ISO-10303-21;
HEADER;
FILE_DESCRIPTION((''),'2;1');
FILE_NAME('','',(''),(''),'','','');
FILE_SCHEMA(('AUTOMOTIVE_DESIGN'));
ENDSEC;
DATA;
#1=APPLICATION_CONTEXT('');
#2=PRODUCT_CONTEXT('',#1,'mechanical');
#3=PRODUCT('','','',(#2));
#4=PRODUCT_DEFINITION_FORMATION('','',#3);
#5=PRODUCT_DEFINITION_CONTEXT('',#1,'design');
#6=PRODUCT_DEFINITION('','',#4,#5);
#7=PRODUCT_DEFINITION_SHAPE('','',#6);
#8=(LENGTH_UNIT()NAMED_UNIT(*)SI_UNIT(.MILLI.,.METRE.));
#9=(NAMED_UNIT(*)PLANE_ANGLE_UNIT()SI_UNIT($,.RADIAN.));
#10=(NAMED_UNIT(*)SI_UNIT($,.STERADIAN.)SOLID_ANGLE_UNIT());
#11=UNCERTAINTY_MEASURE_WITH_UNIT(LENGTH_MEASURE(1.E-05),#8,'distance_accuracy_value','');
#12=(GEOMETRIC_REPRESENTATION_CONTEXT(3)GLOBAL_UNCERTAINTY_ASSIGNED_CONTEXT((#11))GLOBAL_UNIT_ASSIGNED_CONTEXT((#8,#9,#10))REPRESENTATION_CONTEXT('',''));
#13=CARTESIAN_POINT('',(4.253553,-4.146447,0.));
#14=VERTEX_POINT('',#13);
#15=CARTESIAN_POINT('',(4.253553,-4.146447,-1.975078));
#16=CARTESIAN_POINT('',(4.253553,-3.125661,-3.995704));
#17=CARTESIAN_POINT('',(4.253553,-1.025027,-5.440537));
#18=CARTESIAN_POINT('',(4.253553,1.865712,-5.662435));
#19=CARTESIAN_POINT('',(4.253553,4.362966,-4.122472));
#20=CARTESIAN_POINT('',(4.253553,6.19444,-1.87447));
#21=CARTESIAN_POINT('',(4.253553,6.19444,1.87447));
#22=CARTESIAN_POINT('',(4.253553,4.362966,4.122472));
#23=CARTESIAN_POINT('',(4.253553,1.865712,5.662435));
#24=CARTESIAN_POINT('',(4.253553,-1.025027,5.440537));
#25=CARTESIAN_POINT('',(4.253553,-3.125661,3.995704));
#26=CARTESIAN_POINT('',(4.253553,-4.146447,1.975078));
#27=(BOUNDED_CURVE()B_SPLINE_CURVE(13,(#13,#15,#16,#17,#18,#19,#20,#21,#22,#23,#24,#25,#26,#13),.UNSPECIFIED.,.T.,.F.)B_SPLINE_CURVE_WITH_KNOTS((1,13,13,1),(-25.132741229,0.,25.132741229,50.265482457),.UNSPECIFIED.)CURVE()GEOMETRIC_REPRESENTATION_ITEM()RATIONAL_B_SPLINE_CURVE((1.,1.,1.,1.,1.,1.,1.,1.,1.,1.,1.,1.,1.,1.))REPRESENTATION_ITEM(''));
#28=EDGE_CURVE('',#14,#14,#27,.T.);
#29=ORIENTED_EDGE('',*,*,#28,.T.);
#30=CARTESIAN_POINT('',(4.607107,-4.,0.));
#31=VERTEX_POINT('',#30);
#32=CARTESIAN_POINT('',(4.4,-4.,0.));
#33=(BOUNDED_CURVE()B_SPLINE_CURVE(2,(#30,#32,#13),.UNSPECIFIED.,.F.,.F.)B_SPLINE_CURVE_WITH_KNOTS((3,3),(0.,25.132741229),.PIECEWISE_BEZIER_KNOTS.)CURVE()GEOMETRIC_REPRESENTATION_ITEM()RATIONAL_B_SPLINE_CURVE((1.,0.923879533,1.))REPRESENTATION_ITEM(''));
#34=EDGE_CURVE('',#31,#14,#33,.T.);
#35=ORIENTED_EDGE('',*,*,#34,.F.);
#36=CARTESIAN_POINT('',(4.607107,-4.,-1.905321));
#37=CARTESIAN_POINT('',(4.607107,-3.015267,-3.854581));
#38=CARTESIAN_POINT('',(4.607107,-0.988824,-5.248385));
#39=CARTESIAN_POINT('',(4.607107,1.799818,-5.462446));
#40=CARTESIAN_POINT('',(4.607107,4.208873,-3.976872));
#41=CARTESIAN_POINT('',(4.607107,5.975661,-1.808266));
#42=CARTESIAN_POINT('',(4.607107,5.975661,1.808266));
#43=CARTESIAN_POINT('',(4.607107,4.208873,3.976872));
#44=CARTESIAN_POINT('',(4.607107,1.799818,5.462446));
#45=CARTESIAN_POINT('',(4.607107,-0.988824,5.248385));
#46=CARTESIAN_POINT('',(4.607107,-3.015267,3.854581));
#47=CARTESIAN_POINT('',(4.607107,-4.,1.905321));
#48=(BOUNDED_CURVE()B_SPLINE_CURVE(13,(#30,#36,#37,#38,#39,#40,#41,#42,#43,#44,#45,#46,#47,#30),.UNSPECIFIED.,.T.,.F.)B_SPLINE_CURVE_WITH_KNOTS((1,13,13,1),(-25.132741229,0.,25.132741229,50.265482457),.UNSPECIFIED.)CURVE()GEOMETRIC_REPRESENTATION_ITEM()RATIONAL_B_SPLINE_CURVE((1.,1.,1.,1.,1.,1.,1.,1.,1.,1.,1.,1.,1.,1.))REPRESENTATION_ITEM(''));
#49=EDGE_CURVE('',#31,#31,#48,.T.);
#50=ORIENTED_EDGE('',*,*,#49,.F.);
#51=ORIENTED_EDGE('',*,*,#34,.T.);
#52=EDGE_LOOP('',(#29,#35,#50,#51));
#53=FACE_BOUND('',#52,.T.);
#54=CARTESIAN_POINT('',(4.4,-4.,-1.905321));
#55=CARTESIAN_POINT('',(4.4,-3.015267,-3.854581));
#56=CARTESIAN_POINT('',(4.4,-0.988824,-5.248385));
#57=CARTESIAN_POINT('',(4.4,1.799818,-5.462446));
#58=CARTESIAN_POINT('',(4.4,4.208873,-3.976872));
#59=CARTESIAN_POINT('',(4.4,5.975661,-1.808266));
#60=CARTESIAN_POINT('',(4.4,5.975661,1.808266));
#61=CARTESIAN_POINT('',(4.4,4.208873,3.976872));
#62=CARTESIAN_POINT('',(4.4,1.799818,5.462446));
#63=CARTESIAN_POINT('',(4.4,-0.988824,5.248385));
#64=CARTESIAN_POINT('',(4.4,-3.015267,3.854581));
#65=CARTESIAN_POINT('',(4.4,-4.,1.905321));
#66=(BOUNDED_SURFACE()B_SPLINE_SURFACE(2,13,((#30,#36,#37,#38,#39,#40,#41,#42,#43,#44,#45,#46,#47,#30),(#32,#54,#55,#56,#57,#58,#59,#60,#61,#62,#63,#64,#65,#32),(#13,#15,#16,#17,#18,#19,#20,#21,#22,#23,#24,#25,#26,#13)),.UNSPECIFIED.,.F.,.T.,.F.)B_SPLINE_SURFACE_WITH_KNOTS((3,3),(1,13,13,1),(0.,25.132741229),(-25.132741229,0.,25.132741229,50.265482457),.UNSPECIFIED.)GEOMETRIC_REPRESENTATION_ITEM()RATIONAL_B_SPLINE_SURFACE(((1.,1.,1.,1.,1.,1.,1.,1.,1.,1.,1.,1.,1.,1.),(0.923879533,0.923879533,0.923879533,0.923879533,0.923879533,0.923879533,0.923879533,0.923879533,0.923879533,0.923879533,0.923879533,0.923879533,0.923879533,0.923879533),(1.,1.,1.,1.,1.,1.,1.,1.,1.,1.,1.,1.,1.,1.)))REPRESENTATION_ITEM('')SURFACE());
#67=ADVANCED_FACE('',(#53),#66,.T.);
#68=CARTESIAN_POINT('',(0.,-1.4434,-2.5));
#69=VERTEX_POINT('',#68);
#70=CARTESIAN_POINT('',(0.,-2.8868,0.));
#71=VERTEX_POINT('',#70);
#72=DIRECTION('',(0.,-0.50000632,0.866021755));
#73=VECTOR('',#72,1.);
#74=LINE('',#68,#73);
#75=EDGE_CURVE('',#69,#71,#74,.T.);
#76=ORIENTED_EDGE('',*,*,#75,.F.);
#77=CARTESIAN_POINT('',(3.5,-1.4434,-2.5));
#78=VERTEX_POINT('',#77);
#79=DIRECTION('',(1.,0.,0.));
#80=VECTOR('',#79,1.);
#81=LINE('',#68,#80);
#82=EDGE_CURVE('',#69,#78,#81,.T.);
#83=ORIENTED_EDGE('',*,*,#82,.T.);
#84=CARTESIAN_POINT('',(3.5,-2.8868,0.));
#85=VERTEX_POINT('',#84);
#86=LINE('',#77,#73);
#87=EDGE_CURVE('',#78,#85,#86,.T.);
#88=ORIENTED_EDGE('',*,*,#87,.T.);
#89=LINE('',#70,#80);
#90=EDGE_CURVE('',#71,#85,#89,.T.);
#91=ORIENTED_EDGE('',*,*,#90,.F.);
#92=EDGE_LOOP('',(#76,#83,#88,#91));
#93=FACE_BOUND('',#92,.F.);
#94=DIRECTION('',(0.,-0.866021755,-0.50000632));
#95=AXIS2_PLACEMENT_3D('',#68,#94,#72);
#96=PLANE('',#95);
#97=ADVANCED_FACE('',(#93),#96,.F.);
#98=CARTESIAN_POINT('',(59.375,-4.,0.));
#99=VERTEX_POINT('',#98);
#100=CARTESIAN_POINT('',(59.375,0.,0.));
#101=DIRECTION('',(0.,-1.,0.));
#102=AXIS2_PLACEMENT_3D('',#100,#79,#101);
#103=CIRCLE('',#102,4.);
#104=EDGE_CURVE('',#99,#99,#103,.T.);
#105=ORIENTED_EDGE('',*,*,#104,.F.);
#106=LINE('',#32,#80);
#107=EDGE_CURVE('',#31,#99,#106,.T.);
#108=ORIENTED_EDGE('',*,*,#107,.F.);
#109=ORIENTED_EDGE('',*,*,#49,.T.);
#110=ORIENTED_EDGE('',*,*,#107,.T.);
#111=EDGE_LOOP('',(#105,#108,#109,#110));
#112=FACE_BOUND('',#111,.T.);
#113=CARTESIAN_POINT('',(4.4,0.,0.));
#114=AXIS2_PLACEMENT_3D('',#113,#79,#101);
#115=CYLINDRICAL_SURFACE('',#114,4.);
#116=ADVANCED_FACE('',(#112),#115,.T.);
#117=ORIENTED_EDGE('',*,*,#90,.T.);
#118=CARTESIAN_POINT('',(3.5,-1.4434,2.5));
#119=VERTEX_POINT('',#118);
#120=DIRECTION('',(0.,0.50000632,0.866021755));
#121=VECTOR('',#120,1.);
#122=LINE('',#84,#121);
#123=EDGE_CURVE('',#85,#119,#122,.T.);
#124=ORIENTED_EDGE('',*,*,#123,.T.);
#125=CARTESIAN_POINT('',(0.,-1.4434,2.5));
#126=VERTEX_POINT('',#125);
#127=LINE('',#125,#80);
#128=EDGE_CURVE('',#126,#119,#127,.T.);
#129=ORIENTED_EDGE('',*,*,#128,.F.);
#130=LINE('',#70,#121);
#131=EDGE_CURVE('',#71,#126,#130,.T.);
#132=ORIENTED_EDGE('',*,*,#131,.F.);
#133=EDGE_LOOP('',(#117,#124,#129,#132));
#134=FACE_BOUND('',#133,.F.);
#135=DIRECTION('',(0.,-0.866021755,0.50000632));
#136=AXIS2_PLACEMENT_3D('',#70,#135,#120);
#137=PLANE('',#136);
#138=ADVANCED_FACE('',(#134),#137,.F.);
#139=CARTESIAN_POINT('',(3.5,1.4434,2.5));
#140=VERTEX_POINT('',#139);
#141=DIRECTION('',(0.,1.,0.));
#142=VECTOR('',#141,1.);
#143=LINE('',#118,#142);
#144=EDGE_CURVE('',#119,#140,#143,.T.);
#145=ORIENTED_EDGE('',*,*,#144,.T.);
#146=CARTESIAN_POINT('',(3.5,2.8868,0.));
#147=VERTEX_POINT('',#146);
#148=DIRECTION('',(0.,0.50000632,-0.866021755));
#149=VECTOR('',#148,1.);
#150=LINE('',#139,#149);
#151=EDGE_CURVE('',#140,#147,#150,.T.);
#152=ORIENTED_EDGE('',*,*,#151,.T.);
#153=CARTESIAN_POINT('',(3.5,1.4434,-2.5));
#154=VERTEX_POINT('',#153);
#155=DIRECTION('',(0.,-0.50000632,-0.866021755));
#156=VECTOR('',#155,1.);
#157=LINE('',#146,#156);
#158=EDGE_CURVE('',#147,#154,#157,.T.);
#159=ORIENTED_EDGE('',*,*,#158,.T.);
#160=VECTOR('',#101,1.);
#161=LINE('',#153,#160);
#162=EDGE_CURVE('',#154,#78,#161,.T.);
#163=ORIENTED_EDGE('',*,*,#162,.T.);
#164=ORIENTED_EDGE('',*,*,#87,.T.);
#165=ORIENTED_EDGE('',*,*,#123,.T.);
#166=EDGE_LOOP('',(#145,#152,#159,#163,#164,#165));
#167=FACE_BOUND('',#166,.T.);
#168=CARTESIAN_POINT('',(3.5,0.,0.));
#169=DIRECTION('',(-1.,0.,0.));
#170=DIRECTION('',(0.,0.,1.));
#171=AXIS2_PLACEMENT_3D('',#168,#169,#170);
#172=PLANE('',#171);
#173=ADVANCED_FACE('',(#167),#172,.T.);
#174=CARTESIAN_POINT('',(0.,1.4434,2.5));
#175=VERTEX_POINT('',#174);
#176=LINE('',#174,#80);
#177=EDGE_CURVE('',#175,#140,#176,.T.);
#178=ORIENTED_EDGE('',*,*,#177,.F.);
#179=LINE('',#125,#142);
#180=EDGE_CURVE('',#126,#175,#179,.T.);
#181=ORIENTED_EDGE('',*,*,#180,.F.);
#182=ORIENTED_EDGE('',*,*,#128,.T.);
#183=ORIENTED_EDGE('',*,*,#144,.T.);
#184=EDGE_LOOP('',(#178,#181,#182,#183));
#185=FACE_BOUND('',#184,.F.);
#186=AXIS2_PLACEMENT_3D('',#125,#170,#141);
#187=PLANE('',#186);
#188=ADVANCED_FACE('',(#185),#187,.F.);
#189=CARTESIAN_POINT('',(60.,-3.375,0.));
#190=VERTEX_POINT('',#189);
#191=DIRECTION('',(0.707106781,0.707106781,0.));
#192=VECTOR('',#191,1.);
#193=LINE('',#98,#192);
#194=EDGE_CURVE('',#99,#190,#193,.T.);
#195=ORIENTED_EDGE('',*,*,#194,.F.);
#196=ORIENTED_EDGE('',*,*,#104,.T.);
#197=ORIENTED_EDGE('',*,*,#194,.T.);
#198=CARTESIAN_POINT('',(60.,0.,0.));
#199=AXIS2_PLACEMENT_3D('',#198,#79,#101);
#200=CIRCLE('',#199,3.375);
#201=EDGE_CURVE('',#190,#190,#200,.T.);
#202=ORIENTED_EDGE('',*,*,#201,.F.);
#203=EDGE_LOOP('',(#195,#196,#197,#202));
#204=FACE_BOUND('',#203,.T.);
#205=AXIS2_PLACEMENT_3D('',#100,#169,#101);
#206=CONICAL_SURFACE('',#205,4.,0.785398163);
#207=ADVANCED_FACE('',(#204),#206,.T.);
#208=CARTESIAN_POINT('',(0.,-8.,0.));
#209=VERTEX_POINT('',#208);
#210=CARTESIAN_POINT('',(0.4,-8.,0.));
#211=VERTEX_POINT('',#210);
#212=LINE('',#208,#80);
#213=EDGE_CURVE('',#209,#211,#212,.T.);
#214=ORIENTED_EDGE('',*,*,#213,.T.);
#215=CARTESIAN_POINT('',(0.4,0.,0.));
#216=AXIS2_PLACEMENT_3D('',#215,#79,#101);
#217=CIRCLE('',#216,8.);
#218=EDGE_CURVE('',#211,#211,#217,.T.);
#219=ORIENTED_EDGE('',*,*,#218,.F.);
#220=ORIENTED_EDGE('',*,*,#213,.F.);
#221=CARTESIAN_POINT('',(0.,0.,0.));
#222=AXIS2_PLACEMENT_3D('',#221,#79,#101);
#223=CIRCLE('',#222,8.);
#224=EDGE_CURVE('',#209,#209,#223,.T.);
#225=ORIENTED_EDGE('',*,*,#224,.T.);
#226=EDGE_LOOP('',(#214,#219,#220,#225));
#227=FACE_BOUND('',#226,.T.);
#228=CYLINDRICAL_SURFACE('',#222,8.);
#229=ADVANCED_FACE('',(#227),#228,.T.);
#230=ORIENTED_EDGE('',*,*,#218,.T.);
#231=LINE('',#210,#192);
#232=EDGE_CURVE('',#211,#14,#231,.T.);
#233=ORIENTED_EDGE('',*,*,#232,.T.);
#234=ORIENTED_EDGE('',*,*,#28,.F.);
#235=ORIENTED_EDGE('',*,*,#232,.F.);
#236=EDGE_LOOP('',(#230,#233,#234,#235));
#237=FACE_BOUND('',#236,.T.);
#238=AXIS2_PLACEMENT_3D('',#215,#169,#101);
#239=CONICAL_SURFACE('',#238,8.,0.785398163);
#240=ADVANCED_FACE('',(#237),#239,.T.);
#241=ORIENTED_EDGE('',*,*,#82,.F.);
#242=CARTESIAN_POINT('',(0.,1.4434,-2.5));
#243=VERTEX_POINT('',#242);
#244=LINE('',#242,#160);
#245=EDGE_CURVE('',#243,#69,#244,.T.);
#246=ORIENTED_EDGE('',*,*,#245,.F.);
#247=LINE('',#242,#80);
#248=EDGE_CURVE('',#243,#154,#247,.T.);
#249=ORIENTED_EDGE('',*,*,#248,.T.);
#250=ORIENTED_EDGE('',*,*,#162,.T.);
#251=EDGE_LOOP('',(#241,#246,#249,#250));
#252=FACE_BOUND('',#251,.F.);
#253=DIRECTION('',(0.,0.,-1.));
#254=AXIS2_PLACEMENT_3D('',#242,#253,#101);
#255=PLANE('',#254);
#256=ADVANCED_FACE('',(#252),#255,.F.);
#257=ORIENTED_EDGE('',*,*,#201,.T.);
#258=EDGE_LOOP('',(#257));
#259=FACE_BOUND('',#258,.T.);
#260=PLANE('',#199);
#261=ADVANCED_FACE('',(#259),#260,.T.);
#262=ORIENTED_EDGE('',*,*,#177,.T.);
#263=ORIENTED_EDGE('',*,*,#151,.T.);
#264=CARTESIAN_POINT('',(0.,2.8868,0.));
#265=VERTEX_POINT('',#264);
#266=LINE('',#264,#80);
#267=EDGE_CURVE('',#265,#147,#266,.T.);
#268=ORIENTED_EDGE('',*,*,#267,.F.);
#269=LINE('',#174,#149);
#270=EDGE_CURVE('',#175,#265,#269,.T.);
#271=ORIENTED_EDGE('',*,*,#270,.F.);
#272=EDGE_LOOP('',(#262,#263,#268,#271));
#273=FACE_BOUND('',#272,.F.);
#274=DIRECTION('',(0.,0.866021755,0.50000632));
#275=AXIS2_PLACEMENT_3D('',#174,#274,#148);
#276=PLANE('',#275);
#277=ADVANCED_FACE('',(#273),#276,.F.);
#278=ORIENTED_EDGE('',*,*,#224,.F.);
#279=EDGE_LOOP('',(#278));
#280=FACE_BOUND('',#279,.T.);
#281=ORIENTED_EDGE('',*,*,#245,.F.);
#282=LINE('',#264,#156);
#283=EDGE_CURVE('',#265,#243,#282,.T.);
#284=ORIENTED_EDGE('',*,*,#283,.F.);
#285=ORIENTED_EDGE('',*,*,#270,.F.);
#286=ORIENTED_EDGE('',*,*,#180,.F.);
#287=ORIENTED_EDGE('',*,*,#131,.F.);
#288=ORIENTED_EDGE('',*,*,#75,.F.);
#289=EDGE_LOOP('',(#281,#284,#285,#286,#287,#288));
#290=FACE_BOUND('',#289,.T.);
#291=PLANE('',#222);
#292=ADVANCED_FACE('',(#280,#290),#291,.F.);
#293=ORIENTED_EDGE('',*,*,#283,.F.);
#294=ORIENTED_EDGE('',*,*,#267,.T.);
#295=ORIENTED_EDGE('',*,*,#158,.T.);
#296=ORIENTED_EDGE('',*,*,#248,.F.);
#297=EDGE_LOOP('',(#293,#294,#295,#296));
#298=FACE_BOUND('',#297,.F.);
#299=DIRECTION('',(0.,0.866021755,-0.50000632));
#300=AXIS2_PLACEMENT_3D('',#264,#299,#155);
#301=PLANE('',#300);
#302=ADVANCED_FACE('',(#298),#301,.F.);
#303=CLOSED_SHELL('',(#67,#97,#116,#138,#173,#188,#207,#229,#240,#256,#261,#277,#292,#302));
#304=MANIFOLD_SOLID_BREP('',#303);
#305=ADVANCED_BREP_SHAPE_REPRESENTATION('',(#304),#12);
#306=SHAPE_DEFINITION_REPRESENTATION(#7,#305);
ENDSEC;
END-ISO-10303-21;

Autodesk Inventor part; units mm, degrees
ref_plane "YZ Plane" through (0, 0, 0) normal (1, 0, 0) x (0, 1, 0)
sketch "Skizze1" plane through (0, 0, 0) normal (0, 1, 0) x (-1, 0, 0)
  point P0 (0, 0)
sketch "Skizze2" plane through (0, 0, 0) normal (0, 0, 1) x (-1, 0, 0)
  line L0 (-60, 4) -> (-60, 0)
  line L1 (-4.4, 4) -> (-60, 4)
  line L2 (-0.4, 8) -> (-4.4, 4)
  line L3 (0, 8) -> (-0.4, 8)
  line L4 (0, 0) -> (0, 8)
  line L5 (-60, 0) -> (0, 0)
  line L6 (-60, 0) -> (0, 0)
  line L7 (0, -9.6) -> (0, 1.6) projected
  line L8 (12, 0) -> (-72, 0) projected
  dimension "ParC" = 0.4
  dimension "d43" = 45
  dimension "d44" = 8
  dimension "d45" = 4
  dimension "d46" = 60
  dimension "d47" = 0
  dimension "d48" = 0
revolve "Drehung1" add sketch "Skizze2" angle 360 about axis through (60, 0, 0) along (1, 0, 0)
sketch "Skizze3" plane through (0, 0, 0) normal (-1, 0, 0) x (0, 0, 1)
  line L0 (-2.5, 1.4434) -> (-2.5, -1.4434)
  line L1 (0, 2.8868) -> (-2.5, 1.4434)
  line L2 (2.5, 1.4434) -> (0, 2.8868)
  line L3 (2.5, -1.4434) -> (2.5, 1.4434)
  line L4 (0, -2.8868) -> (2.5, -1.4434)
  line L5 (-2.5, -1.4434) -> (0, -2.8868)
  circle A0 centre (0, 0) radius 2.5 construction
  circle A1 centre (0, 0) radius 4 construction
  dimension "d11" = 5
  dimension "d13" = 120
  dimension "d15" = 120
extrude "Extrusion1" cut sketch "Skizze3" against normal blind 3.5
fillet "Rundung1" radius 0.5 1 edges at (4.4, 4, 0)
chamfer "Fase1" distance 0.625 angle 45 1 edges at (60, 4, 0) measured on face at (41.5357, 0.9596, 3.8832)
thread "Gewinde1" size "M8x1.25" class "6g" standard "ISO Metric profile" length 22
ref_plane "MSC_PF1" through (0, 0, 0) normal (1, 0, 0) x (0, 1, 0)
ref_plane "MSC_PT1" through (0, 0, 0) normal (1, 0, 0) x (0, 1, 0)
equation "\"d43\" = 0.5 * ang"
equation "\"d44\" = 0.5 * dk"
equation "\"d45\" = 0.5 * NND"
equation "\"d46\" = NLG"
equation "\"d11\" = ParS"
equation "\"d16\" = ParT"
equation "\"d18\" = r"
equation "\"d19\" = 0.5 * PTC"
equation "\"d39\" = 0.5 * PTC"
equation "\"NND\" = 8"
equation "\"PTC\" = 1.25"
equation "\"dk\" = 16"
equation "\"ParK\" = 4.4"
equation "\"ParS\" = 5"
equation "\"ParT\" = 3.5"
equation "\"r\" = 0.5"
equation "\"NLG\" = 60"
equation "\"ang\" = 90deg"
equation "\"THREADDIA\" = NND"
properties part number "ISO 10642 - M8 x  60" material "Stahl"
